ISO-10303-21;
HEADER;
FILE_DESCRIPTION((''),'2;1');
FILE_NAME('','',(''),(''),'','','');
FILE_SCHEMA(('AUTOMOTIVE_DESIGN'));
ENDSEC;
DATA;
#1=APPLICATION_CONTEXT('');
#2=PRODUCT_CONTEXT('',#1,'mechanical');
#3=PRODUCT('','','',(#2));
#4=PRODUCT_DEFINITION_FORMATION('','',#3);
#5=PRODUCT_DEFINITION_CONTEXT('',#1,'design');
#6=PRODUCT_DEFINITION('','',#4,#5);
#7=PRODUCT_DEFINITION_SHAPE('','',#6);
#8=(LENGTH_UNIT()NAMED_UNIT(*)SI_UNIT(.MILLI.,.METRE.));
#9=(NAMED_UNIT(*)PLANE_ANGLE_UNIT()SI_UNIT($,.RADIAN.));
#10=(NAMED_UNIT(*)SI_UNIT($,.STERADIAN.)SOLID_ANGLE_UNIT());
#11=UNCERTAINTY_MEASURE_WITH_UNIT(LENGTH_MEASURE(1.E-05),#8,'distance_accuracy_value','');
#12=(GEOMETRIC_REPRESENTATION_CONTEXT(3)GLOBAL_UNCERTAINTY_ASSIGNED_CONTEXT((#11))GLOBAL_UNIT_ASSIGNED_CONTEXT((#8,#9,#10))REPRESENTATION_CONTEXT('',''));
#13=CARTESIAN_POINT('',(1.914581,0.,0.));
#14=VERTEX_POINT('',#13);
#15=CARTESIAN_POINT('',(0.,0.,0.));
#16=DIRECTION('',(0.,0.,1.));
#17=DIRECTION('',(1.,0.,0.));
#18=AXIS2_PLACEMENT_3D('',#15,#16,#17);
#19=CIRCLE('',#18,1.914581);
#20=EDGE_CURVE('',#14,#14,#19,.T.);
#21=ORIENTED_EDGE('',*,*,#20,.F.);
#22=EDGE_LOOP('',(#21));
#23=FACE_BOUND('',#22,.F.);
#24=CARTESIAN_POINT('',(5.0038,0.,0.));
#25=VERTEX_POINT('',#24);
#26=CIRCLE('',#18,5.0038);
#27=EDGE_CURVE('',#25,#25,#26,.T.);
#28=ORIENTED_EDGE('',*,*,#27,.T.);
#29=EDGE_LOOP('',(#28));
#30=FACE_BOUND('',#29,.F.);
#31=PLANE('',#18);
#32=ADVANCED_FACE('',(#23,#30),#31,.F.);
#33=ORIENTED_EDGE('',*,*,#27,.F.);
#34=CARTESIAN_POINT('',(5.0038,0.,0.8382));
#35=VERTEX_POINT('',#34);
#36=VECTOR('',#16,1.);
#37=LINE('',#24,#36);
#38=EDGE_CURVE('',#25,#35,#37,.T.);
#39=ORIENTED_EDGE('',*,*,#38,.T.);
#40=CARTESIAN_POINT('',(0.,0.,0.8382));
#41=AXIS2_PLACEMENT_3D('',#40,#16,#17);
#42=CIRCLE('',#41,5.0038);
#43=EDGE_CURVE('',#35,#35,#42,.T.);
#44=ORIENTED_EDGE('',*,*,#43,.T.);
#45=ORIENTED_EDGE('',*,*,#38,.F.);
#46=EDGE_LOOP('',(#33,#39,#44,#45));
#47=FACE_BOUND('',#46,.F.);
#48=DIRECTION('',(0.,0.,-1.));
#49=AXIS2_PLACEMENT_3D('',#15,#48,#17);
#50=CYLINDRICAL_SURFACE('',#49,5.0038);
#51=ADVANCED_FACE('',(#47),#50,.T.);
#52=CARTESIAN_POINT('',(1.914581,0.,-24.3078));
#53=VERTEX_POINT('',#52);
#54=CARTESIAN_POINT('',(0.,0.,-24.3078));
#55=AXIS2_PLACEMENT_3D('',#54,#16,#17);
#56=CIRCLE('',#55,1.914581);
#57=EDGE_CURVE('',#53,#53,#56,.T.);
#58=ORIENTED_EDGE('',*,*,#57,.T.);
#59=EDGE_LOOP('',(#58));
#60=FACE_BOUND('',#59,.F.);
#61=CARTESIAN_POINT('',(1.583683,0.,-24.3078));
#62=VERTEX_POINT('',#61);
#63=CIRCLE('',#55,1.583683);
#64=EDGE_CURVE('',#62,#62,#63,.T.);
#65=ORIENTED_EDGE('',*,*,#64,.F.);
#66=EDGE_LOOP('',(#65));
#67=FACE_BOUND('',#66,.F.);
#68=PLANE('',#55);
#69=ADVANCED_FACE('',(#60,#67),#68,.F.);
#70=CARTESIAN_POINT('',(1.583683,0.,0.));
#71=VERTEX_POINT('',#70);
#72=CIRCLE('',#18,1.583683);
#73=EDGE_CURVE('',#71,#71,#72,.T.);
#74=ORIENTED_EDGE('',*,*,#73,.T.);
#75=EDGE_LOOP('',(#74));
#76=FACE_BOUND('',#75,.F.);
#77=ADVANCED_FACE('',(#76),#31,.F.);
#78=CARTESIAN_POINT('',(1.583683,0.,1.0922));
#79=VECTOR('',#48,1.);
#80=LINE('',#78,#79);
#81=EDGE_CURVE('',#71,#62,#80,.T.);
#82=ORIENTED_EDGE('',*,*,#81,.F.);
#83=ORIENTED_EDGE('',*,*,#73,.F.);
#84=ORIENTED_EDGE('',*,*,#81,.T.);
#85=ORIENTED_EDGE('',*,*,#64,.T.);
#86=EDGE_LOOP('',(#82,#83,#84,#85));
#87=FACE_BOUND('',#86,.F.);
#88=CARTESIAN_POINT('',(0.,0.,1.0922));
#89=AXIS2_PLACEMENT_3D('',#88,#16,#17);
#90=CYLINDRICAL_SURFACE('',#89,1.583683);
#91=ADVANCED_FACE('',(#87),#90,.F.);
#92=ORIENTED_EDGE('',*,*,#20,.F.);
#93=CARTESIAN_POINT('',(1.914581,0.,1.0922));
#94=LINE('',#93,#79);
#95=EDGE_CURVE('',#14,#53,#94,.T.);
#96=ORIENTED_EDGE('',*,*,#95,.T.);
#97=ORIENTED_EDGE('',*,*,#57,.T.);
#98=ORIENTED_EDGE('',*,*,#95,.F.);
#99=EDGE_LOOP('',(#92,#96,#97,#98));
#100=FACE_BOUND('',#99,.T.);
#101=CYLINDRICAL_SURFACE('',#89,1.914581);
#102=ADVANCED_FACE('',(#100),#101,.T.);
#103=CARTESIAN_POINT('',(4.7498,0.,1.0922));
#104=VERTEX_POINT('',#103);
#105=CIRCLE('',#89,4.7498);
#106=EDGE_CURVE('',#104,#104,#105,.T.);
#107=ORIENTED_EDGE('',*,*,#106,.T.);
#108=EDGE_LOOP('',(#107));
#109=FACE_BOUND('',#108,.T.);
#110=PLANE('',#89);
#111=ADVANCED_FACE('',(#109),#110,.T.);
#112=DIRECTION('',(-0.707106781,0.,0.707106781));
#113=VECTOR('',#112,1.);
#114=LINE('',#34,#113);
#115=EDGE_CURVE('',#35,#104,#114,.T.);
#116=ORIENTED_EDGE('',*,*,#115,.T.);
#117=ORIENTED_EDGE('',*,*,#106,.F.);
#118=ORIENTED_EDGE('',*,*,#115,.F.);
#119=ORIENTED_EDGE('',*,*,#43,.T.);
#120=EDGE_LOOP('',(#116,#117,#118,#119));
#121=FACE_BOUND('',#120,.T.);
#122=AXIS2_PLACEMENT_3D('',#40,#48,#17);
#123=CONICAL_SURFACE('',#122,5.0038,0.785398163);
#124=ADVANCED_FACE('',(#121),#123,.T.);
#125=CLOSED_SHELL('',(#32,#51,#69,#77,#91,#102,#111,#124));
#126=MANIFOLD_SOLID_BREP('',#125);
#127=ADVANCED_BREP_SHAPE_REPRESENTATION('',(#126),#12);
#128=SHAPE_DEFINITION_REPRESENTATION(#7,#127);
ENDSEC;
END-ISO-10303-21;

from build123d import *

# Parameters (mm, degrees)
F0_R      = 5.0038
F0_R_2    = 1.9145814382
F1_DEPTH  = 1.6002
F1_FACE_R = 5.0038
F2_DEPTH  = 0.508
F3_SIZE   = 0.254
F4_R      = 1.9145814382
F4_R_2    = 1.5836825197
F5_DEPTH  = 25.4


with BuildPart() as f1:
    # F0 (on Top) → F1 (new body)
    with BuildSketch(Plane.XY):
        Circle(F0_R)
        Circle(F0_R_2, mode=Mode.SUBTRACT)
        Circle(F0_R_2)
    extrude(amount=F1_DEPTH)

    # F0 (on Top) + F1_face (on face) → F2 (cut)
    with BuildSketch(Plane.XY):
        Circle(F0_R)
        Circle(F0_R_2, mode=Mode.SUBTRACT)
    with BuildSketch(Plane.XY.offset(1.6002)):
        Circle(F1_FACE_R)
    extrude(amount=-F2_DEPTH, mode=Mode.SUBTRACT)

    # F3
    f3_edges = [f1.edges().sort_by_distance(p)[0] for p in [
        (-5.0038, 0, 1.0922),
    ]]
    chamfer(f3_edges, length=F3_SIZE)

    # F4 (on face) → F5 (join)
    with BuildSketch(Plane.XY.offset(1.0922)):
        Circle(F4_R)
        Circle(F4_R_2, mode=Mode.SUBTRACT)
    extrude(amount=-F5_DEPTH)


solid = f1.part
